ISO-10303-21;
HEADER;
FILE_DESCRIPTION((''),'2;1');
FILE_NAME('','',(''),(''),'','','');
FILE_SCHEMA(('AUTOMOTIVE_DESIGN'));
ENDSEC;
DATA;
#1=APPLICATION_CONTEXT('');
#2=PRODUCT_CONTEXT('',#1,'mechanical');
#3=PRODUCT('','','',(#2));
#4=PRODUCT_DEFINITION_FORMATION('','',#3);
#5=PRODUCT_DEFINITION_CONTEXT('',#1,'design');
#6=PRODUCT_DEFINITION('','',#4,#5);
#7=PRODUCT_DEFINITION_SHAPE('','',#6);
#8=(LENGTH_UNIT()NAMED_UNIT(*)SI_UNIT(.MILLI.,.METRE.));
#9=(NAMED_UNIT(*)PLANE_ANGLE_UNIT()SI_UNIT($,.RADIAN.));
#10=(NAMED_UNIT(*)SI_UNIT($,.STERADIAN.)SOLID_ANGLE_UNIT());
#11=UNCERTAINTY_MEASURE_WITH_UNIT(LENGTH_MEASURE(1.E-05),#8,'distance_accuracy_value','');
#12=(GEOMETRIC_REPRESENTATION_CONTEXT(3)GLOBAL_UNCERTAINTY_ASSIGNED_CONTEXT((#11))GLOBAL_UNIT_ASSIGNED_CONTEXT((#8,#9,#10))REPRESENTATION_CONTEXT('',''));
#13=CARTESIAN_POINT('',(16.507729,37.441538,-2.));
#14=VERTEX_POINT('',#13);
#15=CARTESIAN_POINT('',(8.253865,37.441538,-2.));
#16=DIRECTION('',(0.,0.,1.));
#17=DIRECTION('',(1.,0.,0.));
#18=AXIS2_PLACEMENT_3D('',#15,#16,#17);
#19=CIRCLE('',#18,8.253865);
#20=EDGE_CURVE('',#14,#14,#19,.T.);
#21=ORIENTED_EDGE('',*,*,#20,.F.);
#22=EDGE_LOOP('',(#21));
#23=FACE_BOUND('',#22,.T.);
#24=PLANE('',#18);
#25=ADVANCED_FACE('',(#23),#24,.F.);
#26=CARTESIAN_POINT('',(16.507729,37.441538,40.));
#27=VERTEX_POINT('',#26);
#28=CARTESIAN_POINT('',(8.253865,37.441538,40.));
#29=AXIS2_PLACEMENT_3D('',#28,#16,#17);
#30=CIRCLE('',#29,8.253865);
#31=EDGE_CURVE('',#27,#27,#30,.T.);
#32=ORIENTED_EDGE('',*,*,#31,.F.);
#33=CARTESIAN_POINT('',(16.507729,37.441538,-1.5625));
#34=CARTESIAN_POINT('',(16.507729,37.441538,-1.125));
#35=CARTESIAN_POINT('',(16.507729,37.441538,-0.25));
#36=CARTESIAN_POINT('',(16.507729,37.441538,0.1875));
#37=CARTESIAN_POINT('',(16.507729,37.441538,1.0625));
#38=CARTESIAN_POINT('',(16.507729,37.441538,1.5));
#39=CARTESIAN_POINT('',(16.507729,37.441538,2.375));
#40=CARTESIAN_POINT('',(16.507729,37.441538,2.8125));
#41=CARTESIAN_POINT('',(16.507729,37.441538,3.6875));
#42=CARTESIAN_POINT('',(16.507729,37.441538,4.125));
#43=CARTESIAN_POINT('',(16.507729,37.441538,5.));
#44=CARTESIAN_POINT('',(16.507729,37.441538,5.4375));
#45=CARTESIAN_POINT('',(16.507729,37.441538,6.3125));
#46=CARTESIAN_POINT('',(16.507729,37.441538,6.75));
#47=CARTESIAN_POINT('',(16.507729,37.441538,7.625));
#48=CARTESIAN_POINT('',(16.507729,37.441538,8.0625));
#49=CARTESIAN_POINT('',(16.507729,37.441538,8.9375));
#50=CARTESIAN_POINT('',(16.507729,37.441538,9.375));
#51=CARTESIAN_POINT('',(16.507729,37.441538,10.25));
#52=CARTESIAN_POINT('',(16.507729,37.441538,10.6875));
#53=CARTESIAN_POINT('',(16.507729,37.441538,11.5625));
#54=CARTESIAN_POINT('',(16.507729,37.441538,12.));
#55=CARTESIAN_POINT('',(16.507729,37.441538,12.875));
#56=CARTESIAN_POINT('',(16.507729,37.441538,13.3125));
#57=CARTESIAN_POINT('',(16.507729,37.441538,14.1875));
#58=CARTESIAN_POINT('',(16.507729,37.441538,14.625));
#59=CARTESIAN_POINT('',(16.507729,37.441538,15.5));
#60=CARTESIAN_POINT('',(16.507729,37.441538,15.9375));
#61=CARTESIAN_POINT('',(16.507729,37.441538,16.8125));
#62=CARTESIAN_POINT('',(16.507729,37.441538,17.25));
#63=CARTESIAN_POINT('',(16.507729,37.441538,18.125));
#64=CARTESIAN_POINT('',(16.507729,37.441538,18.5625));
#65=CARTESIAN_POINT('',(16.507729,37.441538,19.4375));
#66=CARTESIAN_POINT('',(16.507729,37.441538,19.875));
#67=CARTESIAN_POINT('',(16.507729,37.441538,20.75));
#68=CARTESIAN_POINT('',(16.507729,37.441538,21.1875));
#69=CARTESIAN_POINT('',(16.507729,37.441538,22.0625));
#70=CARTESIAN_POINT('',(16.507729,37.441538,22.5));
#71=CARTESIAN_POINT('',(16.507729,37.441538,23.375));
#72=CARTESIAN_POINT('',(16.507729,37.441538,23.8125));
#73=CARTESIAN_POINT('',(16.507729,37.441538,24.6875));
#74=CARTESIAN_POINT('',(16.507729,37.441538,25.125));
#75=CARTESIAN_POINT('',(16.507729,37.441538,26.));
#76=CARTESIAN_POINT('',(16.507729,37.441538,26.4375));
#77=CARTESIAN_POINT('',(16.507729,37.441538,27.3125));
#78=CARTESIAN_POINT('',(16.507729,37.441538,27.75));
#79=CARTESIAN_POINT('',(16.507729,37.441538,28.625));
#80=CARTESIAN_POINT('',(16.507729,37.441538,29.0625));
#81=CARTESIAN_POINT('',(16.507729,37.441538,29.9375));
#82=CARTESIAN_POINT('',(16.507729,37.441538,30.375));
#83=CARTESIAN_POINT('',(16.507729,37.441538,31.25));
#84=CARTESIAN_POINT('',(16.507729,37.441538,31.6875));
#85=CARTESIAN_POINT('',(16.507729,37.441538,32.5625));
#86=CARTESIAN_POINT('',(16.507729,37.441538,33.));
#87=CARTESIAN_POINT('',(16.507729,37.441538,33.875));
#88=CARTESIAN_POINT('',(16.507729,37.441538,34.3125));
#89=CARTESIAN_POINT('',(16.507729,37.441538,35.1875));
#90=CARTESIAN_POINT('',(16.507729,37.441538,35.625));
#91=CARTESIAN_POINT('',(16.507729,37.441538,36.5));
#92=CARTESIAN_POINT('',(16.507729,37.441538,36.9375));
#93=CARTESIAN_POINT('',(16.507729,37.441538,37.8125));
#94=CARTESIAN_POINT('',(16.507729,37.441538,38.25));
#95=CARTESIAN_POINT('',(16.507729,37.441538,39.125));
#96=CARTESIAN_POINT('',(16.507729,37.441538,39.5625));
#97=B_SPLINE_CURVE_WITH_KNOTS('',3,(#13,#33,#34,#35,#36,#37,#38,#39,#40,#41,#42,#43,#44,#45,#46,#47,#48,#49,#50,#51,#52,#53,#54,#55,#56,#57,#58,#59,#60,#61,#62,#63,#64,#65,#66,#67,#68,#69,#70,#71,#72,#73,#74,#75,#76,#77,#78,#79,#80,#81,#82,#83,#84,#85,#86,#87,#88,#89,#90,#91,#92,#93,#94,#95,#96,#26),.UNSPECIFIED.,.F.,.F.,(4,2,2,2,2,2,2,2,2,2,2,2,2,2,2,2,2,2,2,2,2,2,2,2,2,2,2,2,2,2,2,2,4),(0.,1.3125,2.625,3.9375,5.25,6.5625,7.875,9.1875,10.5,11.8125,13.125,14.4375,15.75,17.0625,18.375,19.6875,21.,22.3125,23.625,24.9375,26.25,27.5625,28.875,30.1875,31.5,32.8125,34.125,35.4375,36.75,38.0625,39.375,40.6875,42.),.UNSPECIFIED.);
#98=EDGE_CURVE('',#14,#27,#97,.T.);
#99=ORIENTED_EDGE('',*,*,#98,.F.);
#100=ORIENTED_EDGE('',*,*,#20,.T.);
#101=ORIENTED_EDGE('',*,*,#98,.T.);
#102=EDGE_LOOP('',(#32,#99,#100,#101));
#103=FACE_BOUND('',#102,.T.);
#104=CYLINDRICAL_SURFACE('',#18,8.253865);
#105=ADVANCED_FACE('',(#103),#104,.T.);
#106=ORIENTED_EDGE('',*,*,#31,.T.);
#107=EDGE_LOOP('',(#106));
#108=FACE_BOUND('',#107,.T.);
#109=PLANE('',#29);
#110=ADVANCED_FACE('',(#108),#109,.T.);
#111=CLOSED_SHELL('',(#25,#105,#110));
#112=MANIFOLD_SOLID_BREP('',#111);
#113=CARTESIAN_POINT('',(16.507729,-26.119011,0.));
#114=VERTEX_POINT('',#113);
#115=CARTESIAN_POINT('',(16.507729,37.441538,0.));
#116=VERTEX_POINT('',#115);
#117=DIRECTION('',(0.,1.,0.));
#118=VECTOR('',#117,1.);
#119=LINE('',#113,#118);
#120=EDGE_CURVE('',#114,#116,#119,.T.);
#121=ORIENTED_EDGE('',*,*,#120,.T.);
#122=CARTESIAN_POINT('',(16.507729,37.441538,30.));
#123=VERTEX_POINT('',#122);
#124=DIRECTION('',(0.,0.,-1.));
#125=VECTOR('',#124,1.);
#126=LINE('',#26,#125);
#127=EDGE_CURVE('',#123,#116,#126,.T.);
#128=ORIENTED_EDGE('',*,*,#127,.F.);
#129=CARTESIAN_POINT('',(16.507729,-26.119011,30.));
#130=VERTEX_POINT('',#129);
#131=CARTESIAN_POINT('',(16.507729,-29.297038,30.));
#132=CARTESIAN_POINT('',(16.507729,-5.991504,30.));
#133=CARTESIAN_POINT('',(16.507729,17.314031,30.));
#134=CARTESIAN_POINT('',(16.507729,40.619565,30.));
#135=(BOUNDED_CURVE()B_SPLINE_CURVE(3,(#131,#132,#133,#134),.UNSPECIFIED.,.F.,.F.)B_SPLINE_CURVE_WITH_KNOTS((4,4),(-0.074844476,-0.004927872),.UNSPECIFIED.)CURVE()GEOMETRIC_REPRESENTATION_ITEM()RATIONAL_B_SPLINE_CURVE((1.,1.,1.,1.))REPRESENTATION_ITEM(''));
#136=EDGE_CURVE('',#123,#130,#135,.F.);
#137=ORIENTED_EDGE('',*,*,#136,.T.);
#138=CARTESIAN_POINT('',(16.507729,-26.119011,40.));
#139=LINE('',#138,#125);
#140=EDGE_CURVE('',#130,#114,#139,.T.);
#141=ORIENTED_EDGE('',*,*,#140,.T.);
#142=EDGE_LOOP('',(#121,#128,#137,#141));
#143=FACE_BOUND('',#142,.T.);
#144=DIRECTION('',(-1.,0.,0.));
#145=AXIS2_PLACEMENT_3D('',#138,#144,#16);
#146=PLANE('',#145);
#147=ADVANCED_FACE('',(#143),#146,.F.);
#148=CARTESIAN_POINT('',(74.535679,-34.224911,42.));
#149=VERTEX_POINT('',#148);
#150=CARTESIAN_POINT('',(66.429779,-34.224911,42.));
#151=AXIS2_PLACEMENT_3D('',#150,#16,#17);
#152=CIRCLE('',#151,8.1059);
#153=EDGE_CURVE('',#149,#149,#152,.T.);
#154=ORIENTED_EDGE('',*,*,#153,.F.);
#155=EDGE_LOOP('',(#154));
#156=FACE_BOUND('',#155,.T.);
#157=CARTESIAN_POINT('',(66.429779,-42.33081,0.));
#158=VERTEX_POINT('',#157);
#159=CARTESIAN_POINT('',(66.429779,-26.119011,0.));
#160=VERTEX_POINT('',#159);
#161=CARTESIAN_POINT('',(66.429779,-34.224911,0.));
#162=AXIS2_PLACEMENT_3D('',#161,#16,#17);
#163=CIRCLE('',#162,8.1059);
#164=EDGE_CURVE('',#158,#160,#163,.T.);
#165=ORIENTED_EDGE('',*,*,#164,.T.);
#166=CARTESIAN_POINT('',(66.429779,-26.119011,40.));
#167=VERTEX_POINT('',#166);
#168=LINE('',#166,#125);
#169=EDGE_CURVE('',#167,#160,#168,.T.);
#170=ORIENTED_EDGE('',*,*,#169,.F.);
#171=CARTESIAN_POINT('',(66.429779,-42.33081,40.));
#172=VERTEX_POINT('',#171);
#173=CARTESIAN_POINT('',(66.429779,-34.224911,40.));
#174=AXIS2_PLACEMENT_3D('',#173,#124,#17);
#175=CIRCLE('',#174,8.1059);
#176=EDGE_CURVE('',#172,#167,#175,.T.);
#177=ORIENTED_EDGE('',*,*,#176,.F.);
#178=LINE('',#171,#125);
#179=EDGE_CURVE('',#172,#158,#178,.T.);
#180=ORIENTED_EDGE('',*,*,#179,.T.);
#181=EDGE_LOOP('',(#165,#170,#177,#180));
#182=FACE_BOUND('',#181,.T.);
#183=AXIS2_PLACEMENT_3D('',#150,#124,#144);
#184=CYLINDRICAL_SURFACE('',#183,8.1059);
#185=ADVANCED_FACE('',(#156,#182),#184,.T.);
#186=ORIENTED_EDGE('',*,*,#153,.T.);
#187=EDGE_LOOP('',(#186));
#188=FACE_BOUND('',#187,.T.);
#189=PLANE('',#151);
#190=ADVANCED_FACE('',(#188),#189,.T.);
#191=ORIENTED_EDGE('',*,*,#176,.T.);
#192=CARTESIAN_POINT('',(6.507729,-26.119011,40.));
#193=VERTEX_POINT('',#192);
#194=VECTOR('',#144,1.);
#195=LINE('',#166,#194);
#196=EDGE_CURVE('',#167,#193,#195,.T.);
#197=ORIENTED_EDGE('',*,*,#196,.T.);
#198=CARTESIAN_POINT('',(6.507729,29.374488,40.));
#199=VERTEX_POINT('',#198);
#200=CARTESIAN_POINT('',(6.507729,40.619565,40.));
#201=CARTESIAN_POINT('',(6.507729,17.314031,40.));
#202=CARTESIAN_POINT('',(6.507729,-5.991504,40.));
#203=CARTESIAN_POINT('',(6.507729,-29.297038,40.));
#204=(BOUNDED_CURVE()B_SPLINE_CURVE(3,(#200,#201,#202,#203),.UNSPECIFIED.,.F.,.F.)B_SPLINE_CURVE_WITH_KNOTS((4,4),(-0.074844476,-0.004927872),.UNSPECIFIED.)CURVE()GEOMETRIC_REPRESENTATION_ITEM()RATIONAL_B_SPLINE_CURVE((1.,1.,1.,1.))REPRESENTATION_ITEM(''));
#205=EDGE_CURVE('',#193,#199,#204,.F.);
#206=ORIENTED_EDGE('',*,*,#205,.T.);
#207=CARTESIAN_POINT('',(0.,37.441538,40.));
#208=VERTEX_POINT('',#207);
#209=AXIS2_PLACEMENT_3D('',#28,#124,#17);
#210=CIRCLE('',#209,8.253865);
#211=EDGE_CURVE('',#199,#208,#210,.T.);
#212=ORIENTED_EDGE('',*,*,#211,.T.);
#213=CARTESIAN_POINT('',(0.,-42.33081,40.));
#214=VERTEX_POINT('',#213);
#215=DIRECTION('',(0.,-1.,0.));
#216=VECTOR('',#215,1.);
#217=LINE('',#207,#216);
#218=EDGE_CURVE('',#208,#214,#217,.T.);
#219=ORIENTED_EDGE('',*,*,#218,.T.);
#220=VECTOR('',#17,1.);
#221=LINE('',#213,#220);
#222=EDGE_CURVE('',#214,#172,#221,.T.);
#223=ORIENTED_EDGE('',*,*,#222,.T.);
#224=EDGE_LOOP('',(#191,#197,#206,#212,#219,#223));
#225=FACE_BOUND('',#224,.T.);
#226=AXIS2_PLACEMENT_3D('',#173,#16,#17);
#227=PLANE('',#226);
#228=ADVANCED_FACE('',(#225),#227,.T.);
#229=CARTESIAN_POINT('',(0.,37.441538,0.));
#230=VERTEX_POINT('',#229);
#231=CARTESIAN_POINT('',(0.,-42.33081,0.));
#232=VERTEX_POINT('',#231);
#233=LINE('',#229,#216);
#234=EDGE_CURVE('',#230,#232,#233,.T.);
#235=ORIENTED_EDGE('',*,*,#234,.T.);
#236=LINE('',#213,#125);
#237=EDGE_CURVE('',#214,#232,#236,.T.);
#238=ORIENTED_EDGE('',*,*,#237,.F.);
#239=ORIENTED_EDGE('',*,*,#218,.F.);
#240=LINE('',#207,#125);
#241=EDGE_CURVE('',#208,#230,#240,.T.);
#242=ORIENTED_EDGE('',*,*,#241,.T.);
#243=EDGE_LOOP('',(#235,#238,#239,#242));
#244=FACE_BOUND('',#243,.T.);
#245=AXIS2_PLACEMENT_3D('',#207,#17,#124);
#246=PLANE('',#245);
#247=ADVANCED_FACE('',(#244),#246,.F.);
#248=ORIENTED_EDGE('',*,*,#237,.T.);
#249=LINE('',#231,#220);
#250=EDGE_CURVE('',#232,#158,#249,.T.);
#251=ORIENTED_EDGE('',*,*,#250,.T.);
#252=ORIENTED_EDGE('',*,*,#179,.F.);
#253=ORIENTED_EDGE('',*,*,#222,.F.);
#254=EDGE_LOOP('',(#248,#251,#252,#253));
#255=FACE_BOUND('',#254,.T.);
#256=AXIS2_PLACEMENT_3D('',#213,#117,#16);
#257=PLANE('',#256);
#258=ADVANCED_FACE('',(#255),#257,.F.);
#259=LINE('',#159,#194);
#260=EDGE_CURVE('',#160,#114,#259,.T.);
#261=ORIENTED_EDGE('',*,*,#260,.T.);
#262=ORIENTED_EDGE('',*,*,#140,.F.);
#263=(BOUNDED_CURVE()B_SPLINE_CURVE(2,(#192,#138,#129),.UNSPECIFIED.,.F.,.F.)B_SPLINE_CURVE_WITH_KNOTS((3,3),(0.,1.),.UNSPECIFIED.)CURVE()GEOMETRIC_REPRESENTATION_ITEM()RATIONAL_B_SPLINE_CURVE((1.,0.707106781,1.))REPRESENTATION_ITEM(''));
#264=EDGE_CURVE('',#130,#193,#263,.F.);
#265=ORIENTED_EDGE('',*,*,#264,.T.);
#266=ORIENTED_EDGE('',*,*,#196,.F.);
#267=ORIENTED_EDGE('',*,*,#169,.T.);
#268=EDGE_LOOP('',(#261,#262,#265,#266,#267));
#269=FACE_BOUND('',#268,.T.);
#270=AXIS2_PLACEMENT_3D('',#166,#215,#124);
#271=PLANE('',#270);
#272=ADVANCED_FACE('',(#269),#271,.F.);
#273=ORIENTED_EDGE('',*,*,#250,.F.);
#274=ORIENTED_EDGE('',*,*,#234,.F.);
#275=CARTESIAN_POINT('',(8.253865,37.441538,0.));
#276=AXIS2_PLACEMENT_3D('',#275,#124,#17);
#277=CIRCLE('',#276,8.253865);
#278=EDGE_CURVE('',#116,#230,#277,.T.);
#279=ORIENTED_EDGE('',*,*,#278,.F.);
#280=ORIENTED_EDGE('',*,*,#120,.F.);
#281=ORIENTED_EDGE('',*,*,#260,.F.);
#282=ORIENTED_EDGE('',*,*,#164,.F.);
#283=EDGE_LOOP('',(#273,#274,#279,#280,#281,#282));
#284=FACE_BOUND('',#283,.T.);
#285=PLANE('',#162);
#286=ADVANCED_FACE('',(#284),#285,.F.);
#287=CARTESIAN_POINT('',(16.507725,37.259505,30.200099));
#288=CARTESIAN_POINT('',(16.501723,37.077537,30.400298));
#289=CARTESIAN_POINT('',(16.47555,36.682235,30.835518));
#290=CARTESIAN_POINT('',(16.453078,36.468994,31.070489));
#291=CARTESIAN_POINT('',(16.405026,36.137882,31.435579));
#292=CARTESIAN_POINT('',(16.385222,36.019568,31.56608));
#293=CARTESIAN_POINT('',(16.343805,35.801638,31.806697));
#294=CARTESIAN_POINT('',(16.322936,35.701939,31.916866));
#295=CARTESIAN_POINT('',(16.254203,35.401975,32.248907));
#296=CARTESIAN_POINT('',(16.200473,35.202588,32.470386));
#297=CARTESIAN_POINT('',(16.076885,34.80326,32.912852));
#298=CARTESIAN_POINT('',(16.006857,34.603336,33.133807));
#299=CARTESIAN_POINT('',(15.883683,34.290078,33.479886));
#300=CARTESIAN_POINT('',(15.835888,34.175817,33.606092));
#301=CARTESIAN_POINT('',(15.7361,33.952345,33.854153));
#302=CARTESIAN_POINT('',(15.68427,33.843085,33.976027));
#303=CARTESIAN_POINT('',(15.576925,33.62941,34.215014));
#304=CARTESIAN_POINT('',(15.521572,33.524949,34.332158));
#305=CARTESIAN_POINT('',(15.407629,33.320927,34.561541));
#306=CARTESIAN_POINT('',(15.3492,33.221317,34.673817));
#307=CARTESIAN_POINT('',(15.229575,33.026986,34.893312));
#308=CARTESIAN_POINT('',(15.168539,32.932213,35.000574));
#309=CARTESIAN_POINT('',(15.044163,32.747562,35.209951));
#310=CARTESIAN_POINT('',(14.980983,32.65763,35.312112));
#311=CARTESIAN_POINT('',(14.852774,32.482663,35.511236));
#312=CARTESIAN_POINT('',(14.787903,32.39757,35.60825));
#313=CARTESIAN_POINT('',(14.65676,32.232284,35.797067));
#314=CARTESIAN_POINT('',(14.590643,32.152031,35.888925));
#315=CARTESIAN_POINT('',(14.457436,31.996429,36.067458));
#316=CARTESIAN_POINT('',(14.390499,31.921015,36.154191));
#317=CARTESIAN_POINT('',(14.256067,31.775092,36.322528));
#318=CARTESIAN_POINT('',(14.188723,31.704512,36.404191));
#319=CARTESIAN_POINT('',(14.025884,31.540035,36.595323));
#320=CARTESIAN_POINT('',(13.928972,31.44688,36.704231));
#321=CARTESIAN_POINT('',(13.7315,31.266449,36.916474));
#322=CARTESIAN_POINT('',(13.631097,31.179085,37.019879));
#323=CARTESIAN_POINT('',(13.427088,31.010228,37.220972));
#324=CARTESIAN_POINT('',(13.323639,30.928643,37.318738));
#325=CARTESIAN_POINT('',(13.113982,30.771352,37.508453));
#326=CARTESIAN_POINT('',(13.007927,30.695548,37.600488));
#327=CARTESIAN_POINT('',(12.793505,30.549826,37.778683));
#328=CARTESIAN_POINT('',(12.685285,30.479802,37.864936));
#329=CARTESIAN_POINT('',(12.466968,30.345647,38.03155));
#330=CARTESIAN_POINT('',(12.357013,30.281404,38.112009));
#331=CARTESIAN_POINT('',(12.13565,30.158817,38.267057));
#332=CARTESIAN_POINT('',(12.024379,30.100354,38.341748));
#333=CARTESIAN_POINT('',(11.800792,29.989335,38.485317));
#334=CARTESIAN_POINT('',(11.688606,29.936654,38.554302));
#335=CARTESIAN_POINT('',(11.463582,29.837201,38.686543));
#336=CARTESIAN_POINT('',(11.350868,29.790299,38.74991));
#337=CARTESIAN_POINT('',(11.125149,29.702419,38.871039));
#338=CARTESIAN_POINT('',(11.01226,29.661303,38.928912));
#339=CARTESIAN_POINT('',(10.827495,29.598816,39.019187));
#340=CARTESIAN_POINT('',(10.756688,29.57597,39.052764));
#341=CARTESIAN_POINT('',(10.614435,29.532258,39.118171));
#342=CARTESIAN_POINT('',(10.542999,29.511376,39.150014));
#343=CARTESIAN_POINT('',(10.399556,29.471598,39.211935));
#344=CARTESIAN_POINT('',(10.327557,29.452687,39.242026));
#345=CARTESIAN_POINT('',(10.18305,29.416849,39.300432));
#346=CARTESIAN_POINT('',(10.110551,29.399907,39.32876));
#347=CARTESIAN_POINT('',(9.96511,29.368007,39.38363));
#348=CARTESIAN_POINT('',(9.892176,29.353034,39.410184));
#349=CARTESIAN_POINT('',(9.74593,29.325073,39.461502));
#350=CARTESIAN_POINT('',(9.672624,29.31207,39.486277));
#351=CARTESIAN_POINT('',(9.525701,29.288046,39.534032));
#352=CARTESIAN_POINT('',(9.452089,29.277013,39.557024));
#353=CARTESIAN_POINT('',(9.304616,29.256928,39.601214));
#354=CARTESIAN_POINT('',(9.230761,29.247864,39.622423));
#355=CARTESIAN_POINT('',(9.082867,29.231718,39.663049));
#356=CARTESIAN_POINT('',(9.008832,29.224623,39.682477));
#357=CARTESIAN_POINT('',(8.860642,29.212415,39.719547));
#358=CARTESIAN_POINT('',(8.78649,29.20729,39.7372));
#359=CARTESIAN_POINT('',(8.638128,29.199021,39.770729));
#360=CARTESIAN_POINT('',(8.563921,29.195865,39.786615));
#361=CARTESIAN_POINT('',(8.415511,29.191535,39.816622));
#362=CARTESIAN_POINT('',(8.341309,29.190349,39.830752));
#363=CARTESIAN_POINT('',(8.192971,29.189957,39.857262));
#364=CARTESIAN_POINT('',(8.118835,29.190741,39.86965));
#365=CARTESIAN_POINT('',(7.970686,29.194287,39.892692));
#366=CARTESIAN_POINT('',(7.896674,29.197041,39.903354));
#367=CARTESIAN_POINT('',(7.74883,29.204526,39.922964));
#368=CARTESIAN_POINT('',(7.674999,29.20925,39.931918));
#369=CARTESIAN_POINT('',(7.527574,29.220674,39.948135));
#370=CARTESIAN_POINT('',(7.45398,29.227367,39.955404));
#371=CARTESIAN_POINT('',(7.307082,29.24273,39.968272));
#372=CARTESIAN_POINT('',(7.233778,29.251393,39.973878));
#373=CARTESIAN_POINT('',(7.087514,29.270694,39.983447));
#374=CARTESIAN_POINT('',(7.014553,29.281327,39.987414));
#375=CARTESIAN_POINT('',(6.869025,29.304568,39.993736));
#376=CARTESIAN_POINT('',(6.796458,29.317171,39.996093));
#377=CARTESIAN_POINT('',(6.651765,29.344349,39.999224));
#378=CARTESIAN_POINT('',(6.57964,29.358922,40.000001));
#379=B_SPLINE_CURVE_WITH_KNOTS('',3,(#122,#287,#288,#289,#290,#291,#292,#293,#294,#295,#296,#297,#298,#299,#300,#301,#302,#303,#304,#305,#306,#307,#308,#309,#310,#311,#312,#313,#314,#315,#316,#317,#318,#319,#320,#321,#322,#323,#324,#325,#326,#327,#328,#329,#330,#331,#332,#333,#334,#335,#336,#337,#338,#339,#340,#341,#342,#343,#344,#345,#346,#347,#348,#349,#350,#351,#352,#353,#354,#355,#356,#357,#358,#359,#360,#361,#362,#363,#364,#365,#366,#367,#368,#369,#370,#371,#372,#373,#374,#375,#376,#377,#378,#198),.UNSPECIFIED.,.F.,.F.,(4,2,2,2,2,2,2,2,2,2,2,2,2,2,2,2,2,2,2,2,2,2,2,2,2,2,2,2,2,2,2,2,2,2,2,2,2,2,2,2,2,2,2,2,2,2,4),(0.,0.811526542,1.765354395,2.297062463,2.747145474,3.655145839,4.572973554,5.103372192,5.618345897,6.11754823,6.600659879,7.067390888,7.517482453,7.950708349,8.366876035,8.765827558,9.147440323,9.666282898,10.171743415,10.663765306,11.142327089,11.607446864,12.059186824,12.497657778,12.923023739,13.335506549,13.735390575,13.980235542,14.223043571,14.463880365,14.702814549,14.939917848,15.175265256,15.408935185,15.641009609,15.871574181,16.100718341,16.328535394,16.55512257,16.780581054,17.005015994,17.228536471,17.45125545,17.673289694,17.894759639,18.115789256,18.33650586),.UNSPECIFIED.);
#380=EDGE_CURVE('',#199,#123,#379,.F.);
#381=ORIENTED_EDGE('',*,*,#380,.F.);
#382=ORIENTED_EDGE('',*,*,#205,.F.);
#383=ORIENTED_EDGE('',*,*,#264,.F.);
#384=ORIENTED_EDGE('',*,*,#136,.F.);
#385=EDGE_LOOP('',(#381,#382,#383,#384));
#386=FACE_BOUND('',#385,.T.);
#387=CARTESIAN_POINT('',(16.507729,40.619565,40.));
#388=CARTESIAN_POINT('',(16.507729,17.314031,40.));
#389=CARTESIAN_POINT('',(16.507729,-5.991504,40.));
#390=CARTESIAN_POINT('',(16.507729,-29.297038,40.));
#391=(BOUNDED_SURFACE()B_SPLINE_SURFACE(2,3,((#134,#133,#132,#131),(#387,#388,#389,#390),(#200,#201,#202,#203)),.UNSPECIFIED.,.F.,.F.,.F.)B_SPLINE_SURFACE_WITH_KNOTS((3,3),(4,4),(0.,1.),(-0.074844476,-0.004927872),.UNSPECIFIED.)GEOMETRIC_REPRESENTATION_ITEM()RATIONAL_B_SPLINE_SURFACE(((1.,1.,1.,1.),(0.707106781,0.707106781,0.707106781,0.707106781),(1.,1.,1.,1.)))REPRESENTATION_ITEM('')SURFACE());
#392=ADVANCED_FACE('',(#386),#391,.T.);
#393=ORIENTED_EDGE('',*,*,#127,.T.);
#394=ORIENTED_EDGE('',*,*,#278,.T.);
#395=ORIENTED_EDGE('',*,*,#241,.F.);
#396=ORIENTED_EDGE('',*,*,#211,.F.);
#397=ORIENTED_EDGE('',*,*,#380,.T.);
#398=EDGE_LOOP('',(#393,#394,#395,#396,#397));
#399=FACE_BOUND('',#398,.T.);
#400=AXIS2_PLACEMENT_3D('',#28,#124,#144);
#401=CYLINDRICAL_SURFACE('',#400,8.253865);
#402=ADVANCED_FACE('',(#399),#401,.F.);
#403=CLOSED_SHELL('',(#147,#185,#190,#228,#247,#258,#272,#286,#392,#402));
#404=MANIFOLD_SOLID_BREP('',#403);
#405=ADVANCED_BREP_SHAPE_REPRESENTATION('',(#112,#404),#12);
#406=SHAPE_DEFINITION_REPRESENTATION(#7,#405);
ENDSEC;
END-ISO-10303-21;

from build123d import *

# Parameters (mm, degrees)
BOSS_EXTRUDE1_DEPTH = 40
SKETCH2_R           = 8.25386472
BOSS_EXTRUDE2_DEPTH = 42
SKETCH3_R           = 8.105899881
BOSS_EXTRUDE3_DEPTH = 42
FILLET4_START       = -26.119010727
FILLET4_DEPTH       = 64.119010727


with BuildPart() as part:
    # Sketch1 → Boss-Extrude1 (new body)
    with BuildSketch(Plane.XY):
        with BuildLine():
            Line((0, 37.441537545), (0, -42.330810489))
            Line((0, -42.330810489), (66.429779499, -42.330810489))
            ThreePointArc((66.429779499, -42.330810489), (58.323879619, -34.224910608), (66.429779499, -26.119010727))
            Line((66.429779499, -26.119010727), (16.50772944, -26.119010727))
            Line((16.50772944, -26.119010727), (16.50772944, 37.441537545))
            ThreePointArc((16.50772944, 37.441537545), (8.25386472, 29.187672825), (0, 37.441537545))
        make_face()
    extrude(amount=BOSS_EXTRUDE1_DEPTH)

    # Sketch3 → Boss-Extrude3 (add)
    with BuildSketch(Plane.XY):
        with Locations(Location((66.429779499, -34.224910608, 0), (0, 0, 90))):
            Circle(SKETCH3_R)
    extrude(amount=BOSS_EXTRUDE3_DEPTH)

    # Fillet4: read off the stored shape, not the designer's step
    # Fillet4 outline → Fillet4 (cut)
    with BuildSketch(Plane(origin=(0, 0, 0), x_dir=(1, 0, 0), z_dir=(0, 1, 0)).offset(FILLET4_START)):
        with BuildLine():
            Line((16.50772944, -40), (16.50772944, -30))
            add(Edge.make_bspline(
                [(16.50772944, -30), (16.50772944, -40), (6.50772944, -40)],
                knots=[0, 0, 0, 1, 1, 1], degree=2, weights=[1, 0.707106781, 1]))
            Line((6.50772944, -40), (16.50772944, -40))
        make_face()
    extrude(amount=FILLET4_DEPTH, mode=Mode.SUBTRACT)


with BuildPart() as body_2:
    # Sketch2 → Boss-Extrude2 (new body)
    with BuildSketch(Plane.XY.offset(40)):
        with Locations((8.25386472, 37.441537545)):
            Circle(SKETCH2_R)
    extrude(amount=-BOSS_EXTRUDE2_DEPTH)


solid = Compound([part.part, body_2.part])
